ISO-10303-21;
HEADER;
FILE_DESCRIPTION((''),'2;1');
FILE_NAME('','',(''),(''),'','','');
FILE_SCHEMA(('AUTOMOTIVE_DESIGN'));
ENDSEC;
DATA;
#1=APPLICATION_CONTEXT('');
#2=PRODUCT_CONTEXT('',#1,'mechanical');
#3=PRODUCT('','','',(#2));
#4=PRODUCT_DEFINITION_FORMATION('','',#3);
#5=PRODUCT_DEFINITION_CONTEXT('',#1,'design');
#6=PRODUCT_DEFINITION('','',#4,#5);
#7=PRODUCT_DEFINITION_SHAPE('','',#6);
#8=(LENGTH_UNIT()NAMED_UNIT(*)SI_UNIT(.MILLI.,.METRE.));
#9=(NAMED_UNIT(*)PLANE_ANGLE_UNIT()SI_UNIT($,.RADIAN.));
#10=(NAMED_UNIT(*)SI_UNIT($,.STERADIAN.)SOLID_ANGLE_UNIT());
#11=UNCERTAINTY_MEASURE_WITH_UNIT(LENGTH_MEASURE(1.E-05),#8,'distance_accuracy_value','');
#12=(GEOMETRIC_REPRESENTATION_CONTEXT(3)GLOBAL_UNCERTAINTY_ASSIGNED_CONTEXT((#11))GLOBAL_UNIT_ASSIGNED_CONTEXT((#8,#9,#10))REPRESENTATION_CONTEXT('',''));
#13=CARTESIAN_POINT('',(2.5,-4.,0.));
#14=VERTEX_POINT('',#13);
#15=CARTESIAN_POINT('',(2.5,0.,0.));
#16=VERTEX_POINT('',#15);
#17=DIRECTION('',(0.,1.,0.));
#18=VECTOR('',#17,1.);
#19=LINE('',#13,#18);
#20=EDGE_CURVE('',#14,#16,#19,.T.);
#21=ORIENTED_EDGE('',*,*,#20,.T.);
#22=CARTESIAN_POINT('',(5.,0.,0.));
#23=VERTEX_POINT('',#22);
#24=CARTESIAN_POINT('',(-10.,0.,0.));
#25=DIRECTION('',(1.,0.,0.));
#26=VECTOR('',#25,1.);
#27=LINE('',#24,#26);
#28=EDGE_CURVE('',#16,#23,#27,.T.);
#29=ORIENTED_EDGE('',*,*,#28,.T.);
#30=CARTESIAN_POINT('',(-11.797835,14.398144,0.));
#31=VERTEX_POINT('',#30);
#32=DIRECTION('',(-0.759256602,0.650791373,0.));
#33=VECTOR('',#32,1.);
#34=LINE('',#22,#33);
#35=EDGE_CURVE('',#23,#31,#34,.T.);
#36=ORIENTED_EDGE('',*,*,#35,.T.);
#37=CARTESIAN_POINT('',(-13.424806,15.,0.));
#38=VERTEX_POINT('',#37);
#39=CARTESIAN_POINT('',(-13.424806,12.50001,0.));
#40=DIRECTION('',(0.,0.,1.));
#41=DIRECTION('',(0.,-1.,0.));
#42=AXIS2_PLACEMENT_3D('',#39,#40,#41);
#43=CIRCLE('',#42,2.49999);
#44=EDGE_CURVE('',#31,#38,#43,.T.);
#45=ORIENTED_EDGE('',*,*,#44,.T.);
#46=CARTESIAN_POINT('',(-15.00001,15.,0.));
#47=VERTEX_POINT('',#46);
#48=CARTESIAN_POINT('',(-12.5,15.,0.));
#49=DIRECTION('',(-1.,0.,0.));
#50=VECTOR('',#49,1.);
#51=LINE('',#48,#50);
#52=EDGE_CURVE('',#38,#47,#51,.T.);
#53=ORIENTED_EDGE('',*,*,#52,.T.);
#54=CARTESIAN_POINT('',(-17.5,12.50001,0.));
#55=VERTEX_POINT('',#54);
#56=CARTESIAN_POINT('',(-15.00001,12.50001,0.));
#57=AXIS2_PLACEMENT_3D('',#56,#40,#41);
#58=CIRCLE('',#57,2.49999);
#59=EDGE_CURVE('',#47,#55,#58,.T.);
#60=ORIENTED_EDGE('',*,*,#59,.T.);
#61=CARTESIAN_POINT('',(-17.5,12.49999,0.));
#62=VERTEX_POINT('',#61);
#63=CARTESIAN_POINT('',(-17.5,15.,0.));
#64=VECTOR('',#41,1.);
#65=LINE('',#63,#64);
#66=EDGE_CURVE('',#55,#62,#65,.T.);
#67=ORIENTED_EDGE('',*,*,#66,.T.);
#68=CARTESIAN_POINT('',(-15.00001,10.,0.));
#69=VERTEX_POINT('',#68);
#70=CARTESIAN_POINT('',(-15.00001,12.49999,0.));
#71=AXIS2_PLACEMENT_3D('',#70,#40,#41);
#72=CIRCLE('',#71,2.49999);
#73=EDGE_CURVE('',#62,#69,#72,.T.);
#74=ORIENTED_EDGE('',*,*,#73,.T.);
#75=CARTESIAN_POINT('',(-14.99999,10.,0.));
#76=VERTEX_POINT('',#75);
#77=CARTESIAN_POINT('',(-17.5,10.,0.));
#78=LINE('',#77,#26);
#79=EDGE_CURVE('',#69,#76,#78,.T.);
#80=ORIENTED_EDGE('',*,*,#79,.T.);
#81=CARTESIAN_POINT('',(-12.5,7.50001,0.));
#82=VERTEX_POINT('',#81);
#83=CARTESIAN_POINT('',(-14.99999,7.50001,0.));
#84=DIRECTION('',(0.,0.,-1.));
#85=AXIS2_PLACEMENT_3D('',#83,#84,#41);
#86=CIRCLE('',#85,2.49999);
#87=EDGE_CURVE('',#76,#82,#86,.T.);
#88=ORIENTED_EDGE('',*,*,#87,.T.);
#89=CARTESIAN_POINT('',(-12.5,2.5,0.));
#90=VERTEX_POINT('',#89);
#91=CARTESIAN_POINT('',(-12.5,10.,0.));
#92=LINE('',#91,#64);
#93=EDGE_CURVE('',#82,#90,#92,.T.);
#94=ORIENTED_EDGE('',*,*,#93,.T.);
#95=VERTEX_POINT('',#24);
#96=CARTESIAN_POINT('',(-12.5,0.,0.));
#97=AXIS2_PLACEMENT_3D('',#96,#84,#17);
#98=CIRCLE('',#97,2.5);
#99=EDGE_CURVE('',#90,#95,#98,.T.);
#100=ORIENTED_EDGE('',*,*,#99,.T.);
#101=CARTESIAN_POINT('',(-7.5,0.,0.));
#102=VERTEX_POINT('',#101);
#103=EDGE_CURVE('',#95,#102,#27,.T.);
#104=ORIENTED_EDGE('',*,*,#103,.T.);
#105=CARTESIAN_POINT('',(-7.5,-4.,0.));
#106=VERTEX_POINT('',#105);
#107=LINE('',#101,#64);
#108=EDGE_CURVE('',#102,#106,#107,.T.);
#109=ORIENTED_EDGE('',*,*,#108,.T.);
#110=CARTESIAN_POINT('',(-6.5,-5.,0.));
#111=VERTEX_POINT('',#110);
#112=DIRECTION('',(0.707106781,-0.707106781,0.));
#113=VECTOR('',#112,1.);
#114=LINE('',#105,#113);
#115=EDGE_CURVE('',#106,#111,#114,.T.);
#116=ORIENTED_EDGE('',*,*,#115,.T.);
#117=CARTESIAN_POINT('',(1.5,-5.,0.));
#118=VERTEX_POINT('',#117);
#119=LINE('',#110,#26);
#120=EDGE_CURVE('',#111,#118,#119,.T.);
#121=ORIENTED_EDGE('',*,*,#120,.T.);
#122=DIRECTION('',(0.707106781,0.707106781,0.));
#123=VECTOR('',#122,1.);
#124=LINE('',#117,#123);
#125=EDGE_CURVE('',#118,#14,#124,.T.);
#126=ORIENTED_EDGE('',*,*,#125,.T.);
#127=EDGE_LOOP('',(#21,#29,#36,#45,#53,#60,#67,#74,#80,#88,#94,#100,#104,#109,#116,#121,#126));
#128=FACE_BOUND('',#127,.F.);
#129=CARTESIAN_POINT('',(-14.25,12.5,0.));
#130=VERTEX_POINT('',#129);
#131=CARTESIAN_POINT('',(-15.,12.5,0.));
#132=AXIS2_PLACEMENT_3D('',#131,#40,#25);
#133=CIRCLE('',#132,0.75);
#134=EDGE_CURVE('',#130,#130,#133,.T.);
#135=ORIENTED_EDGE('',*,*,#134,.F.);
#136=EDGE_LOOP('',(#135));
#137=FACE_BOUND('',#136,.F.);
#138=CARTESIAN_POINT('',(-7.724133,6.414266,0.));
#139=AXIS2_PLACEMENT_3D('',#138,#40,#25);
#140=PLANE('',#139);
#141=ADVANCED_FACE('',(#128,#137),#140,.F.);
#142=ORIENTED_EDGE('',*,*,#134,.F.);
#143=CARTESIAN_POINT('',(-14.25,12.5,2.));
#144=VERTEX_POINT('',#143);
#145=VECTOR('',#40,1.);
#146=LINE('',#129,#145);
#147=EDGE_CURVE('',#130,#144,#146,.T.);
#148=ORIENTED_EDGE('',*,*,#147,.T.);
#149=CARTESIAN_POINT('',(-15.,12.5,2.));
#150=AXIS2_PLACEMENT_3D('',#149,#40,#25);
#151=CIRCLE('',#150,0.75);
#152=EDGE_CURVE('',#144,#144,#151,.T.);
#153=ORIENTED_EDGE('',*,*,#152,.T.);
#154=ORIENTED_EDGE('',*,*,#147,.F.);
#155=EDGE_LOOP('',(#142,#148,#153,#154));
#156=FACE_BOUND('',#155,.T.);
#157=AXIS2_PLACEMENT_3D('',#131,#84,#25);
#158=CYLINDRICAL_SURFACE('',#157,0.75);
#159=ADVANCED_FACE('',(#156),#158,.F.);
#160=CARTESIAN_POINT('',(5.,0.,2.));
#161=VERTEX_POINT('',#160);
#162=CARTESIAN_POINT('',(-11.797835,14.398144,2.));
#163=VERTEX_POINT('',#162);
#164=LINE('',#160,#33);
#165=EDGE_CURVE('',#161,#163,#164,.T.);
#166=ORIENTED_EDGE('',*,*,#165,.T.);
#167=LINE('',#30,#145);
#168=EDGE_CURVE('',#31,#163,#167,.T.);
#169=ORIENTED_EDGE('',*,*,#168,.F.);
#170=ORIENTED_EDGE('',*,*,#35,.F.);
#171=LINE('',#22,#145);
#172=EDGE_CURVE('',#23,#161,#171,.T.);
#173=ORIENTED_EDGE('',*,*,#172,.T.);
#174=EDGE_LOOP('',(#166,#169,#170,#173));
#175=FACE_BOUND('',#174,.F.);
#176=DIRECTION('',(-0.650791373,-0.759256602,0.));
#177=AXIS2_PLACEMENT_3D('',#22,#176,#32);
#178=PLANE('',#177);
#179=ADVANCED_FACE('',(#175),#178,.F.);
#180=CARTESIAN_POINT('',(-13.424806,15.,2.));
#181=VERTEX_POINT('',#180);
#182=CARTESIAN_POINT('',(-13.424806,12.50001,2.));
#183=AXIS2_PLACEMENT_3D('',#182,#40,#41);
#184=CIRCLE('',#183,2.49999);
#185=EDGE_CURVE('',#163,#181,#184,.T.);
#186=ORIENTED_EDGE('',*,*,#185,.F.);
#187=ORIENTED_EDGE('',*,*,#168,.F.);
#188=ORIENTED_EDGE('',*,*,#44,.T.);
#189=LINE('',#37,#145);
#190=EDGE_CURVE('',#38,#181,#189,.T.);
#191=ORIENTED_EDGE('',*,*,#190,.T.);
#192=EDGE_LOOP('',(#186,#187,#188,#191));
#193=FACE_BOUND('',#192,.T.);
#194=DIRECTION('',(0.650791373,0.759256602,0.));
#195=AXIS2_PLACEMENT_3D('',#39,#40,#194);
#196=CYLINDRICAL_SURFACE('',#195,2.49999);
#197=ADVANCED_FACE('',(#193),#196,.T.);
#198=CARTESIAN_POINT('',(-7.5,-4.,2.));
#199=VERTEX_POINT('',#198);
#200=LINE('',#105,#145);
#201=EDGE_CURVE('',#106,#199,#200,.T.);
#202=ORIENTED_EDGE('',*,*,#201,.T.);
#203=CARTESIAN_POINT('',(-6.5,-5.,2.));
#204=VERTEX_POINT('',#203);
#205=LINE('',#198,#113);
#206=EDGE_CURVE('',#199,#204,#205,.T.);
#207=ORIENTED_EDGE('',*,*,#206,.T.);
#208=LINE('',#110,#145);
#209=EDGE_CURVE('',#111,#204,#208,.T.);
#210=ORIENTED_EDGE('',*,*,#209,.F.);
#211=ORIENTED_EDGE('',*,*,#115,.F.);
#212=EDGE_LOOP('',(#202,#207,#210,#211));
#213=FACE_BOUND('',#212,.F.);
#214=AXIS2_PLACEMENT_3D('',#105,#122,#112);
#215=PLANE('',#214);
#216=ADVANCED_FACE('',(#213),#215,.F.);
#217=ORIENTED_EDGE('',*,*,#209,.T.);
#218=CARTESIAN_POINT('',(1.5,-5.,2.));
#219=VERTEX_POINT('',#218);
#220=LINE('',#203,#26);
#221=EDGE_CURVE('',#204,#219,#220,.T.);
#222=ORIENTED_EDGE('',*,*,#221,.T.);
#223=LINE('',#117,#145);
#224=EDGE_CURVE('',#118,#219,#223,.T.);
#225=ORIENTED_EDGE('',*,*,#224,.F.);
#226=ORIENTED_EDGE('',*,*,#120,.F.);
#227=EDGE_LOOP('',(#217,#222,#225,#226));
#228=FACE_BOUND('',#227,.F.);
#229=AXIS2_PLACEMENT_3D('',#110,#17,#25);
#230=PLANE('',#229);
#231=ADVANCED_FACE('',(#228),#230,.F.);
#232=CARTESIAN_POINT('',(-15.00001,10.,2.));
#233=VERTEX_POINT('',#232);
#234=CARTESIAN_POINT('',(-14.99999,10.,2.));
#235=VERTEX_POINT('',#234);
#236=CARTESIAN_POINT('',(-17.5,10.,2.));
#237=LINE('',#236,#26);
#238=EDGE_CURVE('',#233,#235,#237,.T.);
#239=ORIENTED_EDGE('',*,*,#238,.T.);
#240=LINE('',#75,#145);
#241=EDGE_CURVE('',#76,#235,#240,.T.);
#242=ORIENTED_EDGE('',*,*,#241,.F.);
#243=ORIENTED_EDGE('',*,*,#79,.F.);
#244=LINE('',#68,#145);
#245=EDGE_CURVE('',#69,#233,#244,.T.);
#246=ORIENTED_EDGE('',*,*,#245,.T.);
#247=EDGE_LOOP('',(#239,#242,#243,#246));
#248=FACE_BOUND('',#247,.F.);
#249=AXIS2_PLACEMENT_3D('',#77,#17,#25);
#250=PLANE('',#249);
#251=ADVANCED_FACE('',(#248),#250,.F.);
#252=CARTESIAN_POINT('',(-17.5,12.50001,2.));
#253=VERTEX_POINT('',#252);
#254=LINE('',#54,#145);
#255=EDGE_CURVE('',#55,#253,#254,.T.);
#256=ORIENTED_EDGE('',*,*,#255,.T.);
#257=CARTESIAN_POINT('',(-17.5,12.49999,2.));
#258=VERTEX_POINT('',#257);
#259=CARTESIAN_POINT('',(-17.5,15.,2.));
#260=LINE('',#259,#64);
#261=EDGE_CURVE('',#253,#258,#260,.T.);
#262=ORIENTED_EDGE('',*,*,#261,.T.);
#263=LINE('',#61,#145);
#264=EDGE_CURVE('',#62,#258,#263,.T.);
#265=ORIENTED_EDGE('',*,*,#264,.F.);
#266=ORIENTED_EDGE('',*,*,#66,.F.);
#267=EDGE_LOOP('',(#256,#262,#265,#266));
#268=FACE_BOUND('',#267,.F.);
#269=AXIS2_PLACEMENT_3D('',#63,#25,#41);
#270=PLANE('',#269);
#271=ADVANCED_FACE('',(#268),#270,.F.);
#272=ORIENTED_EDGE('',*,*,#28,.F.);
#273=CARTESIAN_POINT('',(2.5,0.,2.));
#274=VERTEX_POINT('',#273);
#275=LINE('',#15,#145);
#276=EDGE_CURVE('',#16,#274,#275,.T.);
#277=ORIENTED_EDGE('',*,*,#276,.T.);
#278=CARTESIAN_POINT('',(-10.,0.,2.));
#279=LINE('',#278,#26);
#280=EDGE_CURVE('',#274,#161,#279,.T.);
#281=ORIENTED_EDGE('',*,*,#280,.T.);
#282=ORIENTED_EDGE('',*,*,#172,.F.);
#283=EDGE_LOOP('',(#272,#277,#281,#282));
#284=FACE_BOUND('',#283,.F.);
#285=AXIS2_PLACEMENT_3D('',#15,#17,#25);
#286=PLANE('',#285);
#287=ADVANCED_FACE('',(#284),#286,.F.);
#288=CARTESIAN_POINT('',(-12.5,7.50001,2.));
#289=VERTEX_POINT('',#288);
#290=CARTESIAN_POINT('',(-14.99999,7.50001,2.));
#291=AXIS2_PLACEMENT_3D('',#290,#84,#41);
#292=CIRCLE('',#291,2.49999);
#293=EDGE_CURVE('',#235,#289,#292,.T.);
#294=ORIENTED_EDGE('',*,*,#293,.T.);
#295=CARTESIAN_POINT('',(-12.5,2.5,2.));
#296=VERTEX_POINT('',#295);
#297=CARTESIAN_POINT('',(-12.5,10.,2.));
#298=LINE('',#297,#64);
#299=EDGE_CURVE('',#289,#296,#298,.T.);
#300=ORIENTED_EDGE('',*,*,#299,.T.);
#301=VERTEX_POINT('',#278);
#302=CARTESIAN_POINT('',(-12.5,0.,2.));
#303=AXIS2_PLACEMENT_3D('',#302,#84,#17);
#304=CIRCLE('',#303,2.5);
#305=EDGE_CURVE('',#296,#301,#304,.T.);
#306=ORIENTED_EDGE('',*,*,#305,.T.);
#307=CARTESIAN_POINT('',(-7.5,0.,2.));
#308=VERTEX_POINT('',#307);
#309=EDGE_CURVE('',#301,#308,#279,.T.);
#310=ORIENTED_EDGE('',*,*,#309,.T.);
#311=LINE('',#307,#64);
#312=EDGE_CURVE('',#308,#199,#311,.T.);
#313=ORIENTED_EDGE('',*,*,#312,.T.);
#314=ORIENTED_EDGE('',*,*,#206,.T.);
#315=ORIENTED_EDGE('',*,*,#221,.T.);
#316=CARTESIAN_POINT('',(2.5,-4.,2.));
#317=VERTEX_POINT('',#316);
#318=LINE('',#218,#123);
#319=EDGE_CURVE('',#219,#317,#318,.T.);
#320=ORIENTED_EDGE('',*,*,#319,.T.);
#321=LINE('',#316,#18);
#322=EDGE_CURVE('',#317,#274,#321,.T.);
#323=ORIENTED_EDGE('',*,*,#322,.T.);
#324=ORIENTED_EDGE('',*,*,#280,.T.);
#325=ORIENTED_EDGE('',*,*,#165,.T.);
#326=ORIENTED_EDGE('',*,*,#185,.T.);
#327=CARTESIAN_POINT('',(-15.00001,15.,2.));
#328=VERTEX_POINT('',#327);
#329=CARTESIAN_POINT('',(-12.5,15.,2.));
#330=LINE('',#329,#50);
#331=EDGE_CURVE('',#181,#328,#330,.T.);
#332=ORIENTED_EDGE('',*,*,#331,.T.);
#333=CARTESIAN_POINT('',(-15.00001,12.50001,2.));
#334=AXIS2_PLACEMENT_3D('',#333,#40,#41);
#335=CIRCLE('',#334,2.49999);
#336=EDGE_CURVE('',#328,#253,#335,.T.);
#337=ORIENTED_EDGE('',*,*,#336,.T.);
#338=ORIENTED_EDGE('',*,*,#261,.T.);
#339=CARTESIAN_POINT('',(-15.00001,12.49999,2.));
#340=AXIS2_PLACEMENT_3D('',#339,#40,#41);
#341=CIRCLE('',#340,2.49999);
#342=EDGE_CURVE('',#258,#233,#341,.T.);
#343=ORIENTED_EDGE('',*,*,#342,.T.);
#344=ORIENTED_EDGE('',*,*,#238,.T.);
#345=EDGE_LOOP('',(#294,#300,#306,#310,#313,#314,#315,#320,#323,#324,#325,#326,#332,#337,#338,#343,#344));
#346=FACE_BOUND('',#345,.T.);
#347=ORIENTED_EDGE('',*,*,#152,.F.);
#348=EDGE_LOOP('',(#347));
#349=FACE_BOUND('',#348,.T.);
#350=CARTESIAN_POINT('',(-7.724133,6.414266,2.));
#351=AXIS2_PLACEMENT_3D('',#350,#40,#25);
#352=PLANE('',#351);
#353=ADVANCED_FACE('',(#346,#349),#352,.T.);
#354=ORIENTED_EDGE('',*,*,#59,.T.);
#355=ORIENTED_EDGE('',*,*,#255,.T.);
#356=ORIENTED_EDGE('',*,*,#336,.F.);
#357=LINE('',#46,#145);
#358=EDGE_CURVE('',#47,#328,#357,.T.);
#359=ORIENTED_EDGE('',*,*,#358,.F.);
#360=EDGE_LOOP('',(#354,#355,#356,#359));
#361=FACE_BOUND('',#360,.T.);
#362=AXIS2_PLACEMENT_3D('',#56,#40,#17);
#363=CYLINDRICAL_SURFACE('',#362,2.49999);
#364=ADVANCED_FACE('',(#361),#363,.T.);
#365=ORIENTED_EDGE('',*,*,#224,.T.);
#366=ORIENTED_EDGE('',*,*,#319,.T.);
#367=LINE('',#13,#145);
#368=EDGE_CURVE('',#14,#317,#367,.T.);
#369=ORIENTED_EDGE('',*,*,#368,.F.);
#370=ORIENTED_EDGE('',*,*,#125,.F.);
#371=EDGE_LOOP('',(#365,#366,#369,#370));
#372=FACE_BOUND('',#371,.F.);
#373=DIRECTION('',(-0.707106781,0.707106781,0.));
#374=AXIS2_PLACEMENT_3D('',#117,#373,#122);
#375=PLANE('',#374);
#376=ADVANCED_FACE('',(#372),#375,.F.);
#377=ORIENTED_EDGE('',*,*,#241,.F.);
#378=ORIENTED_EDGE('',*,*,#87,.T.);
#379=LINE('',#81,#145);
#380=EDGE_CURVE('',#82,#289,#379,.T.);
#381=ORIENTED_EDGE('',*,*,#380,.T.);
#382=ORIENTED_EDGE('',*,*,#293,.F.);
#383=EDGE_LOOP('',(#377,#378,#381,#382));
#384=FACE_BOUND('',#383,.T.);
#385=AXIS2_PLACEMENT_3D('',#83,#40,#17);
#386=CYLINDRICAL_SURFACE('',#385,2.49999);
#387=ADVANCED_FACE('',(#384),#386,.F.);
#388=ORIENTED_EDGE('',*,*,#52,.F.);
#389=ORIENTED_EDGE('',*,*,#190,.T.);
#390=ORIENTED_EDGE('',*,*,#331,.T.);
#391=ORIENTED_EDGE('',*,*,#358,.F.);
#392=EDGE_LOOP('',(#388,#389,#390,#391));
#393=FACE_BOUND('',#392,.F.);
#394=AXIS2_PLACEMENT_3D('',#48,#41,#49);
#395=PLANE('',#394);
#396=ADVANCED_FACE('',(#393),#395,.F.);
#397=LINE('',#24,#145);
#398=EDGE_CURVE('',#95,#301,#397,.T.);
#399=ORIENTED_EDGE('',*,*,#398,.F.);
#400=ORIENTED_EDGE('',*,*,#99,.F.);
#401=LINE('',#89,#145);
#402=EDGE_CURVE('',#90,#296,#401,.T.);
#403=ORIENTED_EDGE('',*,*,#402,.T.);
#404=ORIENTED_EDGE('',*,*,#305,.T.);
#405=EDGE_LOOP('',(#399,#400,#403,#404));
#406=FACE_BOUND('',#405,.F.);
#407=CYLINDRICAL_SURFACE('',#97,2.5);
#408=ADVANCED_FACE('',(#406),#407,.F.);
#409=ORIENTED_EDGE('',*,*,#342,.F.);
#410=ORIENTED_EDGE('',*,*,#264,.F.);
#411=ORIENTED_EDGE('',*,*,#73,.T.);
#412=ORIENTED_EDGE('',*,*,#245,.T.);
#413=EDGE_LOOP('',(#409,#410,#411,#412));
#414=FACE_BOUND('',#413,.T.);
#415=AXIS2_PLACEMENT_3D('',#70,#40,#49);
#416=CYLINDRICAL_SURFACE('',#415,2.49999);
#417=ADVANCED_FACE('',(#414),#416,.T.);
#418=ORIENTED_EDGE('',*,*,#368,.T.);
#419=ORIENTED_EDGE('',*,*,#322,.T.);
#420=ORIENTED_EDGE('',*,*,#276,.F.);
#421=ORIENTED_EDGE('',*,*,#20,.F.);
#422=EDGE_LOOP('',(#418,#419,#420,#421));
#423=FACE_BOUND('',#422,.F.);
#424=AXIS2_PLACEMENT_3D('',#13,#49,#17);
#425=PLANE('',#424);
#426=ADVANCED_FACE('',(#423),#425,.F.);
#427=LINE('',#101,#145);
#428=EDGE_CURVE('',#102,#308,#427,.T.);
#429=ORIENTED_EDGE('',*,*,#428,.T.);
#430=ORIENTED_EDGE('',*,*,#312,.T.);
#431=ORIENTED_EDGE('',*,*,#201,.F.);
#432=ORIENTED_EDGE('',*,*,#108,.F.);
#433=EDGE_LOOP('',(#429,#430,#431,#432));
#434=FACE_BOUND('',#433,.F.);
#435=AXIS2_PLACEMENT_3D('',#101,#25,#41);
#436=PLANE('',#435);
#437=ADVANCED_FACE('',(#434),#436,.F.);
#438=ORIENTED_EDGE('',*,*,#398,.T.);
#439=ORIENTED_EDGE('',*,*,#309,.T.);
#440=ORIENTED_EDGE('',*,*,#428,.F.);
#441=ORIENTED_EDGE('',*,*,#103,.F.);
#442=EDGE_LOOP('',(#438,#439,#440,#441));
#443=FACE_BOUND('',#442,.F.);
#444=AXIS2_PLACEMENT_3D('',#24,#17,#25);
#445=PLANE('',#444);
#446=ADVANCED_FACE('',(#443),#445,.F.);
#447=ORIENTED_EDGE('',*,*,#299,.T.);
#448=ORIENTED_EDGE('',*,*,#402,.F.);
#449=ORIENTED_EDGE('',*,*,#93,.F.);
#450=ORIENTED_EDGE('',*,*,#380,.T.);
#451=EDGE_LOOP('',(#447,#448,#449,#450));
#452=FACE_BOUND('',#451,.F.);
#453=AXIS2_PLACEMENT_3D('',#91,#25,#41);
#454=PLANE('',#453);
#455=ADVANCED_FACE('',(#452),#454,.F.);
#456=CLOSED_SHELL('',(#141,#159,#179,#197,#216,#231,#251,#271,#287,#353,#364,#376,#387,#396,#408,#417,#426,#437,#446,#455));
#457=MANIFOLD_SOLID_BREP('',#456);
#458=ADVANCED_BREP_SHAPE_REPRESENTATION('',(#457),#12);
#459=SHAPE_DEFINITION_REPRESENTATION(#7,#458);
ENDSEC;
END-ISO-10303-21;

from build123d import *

# Parameters (mm, degrees)
F0_R     = 0.75
F1_DEPTH = 2
F2_R     = 2.49999


# Not quite as in the source:
# - a fillet or chamfer is up to 0.001 mm smaller than in the source, because OpenCascade refuses the exact size


with BuildPart() as f1:
    # F0 (on Top) → F1 (new body)
    with BuildSketch(Plane.XY):
        with BuildLine():
            Line((-10, 0), (-7.5, 0))
            Line((-7.5, 0), (2.5, 0))
            Line((2.5, 0), (5, 0))
            Line((5, 0), (-12.5, 15))
            Line((-12.5, 15), (-17.5, 15))
            Line((-17.5, 15), (-17.5, 10))
            Line((-17.5, 10), (-12.5, 10))
            Line((-12.5, 10), (-12.5, 2.5))
            ThreePointArc((-12.5, 2.5), (-10.732233047, 1.767766953), (-10, 0))
        make_face()
        with Locations((-15, 12.5)):
            Circle(F0_R, mode=Mode.SUBTRACT)
        Polygon((-7.5, -4), (-6.5, -5), (1.5, -5), (2.5, -4), (2.5, 0), (-7.5, 0), align=None)
    extrude(amount=F1_DEPTH)

    # F2 (radius 2.5 in the source; OpenCascade refuses exactly that, so slightly less here)
    f2_edges = [f1.edges().sort_by_distance(p)[0] for p in [
        (-17.5, 15, 1),
        (-17.5, 10, 1),
        (-12.5, 15, 1),
        (-12.5, 10, 1),
    ]]
    fillet(f2_edges, radius=F2_R)


solid = f1.part
